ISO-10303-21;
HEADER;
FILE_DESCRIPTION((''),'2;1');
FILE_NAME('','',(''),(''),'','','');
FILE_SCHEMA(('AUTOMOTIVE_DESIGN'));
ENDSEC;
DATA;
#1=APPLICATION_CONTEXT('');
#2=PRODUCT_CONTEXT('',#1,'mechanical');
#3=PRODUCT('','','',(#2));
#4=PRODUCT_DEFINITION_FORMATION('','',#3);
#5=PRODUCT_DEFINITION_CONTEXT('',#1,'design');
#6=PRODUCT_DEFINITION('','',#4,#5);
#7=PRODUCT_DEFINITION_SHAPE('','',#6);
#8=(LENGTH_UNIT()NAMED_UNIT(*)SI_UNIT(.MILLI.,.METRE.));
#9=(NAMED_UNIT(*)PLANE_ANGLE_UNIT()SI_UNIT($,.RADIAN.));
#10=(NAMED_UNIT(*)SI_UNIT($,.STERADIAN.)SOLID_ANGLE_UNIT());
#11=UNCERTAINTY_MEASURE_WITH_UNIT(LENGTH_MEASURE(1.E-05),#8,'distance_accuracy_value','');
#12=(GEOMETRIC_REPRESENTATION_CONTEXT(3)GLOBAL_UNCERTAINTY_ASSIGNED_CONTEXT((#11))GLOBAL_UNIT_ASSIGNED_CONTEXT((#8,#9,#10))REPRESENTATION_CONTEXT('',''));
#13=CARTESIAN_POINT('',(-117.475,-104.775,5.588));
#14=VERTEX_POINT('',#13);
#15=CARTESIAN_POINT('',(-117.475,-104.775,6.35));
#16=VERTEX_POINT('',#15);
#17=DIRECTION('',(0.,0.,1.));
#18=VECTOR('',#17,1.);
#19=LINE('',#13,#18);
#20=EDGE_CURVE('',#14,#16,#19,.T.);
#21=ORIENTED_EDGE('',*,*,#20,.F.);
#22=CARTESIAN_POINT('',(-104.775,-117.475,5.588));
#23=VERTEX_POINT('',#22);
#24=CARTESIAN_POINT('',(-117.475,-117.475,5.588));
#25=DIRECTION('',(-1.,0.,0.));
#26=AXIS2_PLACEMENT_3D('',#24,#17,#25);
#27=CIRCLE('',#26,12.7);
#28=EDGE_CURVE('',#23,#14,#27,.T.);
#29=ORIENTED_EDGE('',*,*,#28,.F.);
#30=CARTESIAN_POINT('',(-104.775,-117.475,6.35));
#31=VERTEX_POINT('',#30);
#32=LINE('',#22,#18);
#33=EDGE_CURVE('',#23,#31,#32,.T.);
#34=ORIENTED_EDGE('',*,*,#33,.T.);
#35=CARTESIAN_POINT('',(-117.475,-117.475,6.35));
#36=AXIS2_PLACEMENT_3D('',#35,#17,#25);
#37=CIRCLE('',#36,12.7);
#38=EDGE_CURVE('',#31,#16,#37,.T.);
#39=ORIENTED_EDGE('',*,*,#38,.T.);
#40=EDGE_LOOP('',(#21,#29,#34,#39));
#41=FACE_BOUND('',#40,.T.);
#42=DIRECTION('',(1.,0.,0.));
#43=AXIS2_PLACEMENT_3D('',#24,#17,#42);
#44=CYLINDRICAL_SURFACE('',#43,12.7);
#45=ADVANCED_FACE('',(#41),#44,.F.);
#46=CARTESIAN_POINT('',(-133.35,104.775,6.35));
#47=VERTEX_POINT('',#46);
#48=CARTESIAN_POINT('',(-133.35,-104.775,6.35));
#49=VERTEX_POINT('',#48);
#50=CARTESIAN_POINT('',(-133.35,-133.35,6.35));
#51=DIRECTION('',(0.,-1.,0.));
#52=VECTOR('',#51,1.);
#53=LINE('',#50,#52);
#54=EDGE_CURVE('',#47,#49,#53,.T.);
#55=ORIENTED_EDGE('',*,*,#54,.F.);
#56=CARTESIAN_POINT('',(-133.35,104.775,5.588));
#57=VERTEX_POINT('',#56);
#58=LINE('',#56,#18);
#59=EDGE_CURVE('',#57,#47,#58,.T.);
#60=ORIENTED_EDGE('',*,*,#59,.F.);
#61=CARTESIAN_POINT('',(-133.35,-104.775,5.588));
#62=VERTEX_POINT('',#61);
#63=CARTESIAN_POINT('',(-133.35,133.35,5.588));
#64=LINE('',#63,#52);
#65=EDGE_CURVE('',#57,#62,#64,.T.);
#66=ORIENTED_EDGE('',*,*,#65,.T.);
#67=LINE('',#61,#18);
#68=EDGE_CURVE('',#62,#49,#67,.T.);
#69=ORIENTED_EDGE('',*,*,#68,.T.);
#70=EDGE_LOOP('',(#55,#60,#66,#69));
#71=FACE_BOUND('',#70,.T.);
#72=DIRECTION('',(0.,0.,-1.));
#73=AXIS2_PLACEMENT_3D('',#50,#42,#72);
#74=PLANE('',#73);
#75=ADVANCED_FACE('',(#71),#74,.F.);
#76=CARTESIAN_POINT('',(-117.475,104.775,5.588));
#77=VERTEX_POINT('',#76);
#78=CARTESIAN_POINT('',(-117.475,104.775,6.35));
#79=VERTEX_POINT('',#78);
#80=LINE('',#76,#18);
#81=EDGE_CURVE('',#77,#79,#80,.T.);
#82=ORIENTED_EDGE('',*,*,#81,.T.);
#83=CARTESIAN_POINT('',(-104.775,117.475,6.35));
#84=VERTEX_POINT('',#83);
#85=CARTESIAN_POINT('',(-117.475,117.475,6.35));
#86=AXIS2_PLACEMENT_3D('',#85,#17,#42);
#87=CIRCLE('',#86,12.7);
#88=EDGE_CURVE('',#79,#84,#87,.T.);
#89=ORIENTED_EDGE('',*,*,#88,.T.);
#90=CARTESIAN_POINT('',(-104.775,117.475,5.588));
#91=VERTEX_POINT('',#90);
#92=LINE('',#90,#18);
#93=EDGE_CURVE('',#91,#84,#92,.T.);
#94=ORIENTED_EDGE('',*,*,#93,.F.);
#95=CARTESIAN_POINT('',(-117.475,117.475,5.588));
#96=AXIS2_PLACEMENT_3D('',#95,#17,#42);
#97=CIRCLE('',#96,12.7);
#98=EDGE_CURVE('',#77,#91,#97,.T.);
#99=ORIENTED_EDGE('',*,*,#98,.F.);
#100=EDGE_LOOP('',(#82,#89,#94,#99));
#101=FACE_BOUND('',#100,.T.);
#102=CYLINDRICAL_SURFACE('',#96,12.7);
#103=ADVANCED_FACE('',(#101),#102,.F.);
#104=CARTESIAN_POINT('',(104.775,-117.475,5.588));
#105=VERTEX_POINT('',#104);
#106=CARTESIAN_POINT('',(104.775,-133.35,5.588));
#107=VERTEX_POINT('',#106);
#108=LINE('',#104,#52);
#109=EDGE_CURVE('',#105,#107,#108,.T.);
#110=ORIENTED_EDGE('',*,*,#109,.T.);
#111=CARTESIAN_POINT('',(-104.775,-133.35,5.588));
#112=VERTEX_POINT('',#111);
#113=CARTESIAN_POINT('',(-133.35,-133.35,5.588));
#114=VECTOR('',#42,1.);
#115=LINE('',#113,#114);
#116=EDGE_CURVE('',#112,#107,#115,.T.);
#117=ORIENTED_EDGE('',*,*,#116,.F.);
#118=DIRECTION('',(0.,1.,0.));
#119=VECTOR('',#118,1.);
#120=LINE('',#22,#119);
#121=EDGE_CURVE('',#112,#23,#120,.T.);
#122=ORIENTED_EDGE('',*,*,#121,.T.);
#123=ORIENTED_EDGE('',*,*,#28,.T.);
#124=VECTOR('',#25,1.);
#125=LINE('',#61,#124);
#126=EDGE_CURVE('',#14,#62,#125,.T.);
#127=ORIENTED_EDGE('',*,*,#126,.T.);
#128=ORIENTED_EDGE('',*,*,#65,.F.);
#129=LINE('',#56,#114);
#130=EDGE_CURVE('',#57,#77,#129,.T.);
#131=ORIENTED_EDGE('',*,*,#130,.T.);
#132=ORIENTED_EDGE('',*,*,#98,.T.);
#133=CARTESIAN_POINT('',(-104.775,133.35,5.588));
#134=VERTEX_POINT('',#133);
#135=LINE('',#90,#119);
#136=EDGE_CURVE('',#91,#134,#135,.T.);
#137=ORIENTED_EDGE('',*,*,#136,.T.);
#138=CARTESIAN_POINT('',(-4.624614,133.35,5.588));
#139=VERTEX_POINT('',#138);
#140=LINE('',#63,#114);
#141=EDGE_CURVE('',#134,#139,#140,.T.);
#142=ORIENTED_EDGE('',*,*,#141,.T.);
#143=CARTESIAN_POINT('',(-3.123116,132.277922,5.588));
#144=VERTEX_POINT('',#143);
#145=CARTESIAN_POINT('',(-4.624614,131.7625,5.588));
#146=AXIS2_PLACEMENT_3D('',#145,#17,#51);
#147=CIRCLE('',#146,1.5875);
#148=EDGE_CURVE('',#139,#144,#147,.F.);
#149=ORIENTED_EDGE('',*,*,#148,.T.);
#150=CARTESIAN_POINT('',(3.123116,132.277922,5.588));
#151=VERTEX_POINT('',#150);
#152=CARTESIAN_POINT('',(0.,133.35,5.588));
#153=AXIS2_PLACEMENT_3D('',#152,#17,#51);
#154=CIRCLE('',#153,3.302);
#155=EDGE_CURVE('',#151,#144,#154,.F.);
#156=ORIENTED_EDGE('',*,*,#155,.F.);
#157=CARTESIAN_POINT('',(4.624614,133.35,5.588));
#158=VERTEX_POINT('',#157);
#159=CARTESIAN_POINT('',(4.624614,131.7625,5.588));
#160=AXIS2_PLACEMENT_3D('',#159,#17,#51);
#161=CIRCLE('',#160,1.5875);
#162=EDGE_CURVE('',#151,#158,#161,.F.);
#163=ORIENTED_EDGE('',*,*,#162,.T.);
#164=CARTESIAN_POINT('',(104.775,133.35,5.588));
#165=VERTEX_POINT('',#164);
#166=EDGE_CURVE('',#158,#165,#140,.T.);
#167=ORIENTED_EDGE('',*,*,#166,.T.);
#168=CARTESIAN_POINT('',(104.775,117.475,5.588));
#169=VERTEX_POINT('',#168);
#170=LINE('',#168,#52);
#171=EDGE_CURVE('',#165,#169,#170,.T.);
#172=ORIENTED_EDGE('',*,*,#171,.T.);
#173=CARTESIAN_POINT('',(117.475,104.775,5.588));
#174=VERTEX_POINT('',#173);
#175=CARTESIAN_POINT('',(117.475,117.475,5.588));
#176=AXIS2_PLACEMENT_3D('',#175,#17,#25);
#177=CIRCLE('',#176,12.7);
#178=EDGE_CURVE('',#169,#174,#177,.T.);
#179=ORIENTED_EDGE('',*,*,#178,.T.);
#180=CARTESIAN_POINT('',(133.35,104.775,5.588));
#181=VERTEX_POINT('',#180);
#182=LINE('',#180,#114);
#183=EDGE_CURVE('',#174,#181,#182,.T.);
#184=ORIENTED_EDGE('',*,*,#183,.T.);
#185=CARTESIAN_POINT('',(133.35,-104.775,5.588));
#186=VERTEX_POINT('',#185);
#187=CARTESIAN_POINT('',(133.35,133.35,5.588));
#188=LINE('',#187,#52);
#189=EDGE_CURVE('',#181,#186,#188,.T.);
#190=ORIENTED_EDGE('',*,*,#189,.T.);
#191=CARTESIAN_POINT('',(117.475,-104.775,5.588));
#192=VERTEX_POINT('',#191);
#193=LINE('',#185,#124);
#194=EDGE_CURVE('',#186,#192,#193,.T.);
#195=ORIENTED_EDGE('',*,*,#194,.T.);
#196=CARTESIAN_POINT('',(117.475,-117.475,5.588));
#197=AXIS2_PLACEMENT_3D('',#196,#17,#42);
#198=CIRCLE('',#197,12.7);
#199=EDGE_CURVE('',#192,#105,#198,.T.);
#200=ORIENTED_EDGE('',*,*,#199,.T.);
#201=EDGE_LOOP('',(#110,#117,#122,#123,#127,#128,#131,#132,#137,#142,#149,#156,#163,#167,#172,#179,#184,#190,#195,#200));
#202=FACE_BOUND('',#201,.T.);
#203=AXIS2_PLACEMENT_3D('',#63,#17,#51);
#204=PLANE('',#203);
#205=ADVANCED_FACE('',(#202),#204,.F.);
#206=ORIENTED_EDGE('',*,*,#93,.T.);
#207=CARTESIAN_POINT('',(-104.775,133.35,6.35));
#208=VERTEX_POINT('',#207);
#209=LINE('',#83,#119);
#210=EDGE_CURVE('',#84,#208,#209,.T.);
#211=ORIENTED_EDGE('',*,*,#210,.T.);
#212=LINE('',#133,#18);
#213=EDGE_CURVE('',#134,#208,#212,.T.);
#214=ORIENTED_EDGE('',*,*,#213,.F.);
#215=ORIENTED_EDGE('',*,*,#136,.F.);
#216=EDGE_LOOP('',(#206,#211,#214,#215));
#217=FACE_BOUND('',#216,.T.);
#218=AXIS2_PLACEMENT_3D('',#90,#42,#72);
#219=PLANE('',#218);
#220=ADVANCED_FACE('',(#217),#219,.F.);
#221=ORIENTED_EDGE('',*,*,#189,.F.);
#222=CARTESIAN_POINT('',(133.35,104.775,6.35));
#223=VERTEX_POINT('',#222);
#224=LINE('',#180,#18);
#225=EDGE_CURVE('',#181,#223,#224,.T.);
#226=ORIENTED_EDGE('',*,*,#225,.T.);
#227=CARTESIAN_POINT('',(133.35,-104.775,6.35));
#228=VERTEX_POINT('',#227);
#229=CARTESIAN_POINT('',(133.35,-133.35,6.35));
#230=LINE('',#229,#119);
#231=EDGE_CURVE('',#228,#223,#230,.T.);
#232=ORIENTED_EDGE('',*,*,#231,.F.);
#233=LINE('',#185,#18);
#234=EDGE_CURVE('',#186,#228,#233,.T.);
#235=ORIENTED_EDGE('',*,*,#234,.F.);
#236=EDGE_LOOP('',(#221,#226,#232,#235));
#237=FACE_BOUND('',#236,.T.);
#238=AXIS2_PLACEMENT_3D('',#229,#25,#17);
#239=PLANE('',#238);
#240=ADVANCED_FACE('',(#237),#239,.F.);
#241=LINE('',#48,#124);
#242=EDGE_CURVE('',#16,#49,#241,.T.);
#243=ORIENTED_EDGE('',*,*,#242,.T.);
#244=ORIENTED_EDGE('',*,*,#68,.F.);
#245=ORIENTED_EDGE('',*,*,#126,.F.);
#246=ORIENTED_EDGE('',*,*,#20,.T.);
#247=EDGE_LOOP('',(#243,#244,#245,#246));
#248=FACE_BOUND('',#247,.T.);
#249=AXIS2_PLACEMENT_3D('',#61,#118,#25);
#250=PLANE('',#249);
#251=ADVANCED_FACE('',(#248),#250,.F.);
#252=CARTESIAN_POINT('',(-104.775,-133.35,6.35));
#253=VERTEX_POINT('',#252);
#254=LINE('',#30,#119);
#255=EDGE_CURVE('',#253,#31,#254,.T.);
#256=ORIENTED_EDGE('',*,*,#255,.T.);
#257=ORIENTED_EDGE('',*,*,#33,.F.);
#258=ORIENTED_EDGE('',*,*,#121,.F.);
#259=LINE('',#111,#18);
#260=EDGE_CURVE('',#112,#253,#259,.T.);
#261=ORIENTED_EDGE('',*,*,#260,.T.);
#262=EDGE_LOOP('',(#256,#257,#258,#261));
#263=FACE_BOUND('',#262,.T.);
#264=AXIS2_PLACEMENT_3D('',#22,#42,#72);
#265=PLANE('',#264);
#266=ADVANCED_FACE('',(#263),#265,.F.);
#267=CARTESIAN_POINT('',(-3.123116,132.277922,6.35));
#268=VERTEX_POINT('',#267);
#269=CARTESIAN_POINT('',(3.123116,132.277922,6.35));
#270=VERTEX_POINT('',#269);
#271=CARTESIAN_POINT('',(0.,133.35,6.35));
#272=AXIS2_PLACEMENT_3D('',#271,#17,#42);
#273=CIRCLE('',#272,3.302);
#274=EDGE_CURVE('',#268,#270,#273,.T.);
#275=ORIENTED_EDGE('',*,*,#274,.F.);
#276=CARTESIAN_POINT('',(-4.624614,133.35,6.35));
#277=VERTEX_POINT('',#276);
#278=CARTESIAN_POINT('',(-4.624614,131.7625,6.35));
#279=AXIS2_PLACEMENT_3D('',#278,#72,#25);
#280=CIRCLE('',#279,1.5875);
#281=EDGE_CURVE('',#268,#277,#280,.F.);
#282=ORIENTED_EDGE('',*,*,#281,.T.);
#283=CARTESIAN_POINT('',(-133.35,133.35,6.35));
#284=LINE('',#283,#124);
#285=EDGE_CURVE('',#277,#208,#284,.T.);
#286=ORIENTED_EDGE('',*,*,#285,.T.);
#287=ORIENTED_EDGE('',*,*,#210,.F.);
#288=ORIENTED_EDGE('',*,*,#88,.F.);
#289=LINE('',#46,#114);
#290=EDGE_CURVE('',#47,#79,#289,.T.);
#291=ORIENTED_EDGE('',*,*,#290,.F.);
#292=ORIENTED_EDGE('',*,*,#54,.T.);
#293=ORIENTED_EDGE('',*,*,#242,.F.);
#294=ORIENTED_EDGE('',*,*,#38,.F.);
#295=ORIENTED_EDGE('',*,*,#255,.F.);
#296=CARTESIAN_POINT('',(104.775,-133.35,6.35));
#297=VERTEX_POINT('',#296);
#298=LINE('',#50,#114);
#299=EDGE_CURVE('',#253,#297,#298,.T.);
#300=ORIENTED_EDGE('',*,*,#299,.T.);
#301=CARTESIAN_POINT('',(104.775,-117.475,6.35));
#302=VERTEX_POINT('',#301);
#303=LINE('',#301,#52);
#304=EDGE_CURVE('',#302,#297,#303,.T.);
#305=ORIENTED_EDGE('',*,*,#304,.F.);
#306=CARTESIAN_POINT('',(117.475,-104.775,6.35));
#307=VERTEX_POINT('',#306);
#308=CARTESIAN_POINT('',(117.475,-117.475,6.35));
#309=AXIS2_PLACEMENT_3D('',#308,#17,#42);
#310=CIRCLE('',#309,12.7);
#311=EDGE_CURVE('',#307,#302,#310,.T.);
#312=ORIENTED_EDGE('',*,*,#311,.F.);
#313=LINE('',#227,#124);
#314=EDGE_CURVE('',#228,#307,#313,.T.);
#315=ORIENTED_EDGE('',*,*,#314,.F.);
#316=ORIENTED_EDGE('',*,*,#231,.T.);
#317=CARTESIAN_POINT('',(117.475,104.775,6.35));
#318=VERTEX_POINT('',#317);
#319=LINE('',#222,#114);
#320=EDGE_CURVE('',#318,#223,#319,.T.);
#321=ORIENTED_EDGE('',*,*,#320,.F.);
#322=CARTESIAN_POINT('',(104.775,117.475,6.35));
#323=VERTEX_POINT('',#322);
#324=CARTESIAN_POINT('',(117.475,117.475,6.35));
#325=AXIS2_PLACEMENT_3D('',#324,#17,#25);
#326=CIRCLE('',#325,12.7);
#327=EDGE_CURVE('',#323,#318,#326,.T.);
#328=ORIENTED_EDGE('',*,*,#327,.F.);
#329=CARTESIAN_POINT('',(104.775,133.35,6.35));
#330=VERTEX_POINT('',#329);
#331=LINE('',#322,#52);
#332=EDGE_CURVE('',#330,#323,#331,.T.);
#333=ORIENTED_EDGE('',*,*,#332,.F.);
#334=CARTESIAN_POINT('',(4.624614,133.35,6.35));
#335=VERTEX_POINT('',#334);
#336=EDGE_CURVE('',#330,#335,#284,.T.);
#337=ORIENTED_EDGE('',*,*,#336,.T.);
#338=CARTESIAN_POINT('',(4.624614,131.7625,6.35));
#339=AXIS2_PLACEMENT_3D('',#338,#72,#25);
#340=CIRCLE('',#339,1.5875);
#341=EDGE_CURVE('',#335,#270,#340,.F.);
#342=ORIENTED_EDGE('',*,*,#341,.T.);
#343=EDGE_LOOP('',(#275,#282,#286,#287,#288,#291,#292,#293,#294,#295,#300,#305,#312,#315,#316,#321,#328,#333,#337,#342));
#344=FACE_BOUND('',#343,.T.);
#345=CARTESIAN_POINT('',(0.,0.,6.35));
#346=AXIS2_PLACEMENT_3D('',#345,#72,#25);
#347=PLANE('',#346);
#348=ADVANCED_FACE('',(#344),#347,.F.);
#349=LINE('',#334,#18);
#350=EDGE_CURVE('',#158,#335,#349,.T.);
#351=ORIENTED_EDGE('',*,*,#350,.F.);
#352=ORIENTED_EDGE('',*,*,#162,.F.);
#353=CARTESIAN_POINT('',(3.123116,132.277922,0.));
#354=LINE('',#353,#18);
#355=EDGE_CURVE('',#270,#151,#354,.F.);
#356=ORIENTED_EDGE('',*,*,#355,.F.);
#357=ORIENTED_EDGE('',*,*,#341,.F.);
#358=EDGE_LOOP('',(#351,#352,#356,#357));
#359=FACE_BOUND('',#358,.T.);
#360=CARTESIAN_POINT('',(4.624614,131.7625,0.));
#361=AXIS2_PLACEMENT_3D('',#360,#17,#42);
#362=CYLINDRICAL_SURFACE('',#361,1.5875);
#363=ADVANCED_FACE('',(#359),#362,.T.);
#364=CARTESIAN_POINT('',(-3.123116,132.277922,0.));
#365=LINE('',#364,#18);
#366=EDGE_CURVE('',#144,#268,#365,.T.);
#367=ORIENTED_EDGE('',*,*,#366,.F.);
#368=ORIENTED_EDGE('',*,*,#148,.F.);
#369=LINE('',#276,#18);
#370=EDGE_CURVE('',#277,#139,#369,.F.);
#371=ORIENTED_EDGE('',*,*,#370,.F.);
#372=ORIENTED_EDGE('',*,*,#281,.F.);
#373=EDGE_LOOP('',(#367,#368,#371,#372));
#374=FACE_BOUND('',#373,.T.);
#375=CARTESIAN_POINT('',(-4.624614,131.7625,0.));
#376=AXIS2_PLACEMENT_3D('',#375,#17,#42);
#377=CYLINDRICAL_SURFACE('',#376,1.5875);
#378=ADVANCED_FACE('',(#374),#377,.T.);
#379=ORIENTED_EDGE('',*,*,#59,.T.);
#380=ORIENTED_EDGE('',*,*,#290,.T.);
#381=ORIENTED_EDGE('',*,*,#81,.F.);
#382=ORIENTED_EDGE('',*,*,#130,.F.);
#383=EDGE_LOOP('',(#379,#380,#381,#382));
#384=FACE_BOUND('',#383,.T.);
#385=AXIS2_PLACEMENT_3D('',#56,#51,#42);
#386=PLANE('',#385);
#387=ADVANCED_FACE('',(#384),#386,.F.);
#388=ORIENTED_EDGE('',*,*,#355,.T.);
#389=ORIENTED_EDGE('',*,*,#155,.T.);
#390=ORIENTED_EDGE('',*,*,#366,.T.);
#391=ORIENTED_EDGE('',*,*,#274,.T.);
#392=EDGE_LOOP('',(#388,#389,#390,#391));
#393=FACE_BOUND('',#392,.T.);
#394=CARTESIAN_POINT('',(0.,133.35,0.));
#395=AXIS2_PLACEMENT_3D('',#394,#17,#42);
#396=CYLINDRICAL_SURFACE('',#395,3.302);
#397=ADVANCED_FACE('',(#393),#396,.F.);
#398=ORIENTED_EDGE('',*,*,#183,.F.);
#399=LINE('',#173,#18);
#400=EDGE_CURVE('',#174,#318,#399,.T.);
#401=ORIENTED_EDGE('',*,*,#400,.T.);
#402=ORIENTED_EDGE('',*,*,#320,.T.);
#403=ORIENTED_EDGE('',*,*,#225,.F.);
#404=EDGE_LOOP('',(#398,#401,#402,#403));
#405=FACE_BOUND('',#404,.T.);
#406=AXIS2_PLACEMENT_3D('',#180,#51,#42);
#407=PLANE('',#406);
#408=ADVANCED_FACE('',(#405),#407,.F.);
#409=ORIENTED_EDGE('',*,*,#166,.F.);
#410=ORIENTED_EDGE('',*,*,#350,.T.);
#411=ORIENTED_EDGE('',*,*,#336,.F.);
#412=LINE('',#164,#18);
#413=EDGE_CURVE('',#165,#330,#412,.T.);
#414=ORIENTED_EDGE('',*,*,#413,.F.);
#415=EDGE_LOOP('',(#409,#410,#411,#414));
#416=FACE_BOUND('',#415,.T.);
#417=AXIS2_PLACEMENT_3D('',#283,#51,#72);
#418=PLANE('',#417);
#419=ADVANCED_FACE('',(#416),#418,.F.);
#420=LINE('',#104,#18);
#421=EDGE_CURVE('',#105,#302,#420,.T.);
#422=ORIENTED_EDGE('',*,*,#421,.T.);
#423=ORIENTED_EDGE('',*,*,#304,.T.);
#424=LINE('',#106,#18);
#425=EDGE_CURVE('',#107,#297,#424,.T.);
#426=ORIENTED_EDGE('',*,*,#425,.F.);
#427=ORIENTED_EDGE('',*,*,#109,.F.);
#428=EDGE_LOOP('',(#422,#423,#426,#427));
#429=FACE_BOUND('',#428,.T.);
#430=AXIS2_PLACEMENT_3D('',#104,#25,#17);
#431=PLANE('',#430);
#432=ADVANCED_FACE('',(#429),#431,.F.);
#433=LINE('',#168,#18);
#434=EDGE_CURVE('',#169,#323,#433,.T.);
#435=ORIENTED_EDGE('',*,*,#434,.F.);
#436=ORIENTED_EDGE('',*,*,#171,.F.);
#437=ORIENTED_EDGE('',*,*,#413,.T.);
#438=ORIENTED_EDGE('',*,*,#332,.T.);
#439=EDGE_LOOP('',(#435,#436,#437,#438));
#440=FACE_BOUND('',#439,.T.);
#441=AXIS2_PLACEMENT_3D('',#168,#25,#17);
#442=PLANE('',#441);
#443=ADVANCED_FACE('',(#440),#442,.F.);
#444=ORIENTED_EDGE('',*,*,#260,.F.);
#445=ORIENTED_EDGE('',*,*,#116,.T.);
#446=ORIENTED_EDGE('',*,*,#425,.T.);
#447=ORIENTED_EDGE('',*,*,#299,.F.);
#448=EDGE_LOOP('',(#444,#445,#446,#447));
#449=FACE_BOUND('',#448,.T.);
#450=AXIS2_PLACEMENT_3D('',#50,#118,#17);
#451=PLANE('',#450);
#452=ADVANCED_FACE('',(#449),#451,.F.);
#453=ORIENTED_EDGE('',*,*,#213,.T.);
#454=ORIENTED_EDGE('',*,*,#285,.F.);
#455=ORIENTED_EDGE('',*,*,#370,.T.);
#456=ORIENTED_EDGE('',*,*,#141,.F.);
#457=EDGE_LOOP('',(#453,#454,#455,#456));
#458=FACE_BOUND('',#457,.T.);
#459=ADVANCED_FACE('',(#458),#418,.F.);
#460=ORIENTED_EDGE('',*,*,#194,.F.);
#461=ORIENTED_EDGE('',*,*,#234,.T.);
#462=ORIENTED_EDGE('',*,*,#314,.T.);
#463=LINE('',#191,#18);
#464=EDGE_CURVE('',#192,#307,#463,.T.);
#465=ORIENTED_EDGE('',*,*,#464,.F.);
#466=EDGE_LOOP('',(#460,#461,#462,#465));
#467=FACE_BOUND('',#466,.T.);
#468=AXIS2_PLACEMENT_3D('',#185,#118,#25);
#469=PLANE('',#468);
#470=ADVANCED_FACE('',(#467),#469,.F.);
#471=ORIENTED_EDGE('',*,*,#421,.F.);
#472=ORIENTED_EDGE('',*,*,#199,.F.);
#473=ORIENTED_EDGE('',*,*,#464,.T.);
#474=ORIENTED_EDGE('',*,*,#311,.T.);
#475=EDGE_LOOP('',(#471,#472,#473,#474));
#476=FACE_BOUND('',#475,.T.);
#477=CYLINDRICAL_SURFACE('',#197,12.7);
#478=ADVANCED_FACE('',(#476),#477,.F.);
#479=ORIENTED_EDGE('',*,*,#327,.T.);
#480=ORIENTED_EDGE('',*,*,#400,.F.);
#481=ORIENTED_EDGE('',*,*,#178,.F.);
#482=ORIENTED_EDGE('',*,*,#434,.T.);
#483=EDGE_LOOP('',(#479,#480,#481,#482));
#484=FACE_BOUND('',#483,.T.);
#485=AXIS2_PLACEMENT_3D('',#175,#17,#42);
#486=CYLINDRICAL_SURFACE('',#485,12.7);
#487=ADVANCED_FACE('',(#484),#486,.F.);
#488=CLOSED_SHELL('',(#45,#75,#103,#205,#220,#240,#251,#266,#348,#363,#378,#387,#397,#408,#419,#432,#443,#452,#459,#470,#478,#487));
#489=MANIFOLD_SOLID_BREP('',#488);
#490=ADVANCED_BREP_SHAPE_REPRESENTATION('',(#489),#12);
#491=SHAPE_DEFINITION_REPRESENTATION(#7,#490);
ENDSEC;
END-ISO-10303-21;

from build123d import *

# Parameters (mm, degrees)
FE_00082_OUTLINE_R = 3.3782
FE_00082_DEPTH     = 6.35
SKETCH1_W          = 5.588
SKETCH1_H          = 266.7
CUT_EXTRUDE1_DEPTH = 299.247271572
CUT_EXTRUDE2_DEPTH = 189.586918009


# Read off the part's stored shape, not the designer's step: FE-00082
with BuildPart() as part:
    # FE-00082 outline → FE-00082 (new body)
    with BuildSketch(Plane.XY):
        with BuildLine():
            Line((127, 133.35), (4.62461393, 133.35))
            ThreePointArc((4.62461393, 133.35), (3.702137995, 133.054473064), (3.123115901, 132.277922078))
            ThreePointArc((3.123115901, 132.277922078), (0, 130.048), (-3.123115901, 132.277922078))
            ThreePointArc((-3.123115901, 132.277922078), (-3.702137995, 133.054473064), (-4.62461393, 133.35))
            Line((-4.62461393, 133.35), (-127, 133.35))
            ThreePointArc((-127, 133.35), (-131.490128061, 131.490128061), (-133.35, 127))
            Line((-133.35, 127), (-133.35, -127))
            ThreePointArc((-133.35, -127), (-131.490128061, -131.490128061), (-127, -133.35))
            Line((-127, -133.35), (127, -133.35))
            ThreePointArc((127, -133.35), (131.490128061, -131.490128061), (133.35, -127))
            Line((133.35, -127), (133.35, 127))
            ThreePointArc((133.35, 127), (131.490128061, 131.490128061), (127, 133.35))
        make_face()
        with Locations((-117.475, -117.475)):
            Circle(FE_00082_OUTLINE_R, mode=Mode.SUBTRACT)
        with Locations((117.475, -117.475)):
            Circle(FE_00082_OUTLINE_R, mode=Mode.SUBTRACT)
        with Locations((-117.475, 117.475)):
            Circle(FE_00082_OUTLINE_R, mode=Mode.SUBTRACT)
        with Locations((117.475, 117.475)):
            Circle(FE_00082_OUTLINE_R, mode=Mode.SUBTRACT)
    extrude(amount=FE_00082_DEPTH)

    # Sketch1 → Cut-Extrude1 (cut, through all)
    with BuildSketch(Plane(origin=(133.35, 0, 0), x_dir=(0, 0, -1), z_dir=(1, 0, 0))):
        with Locations((-2.794, 0)):
            Rectangle(SKETCH1_W, SKETCH1_H)
    extrude(amount=-CUT_EXTRUDE1_DEPTH, mode=Mode.SUBTRACT)

    # Sketch2 → Cut-Extrude2 (cut, through all)
    with BuildSketch(Plane.XY.offset(6.35)):
        with BuildLine():
            Line((-133.35, 104.775), (-117.475, 104.775))
            ThreePointArc((-117.475, 104.775), (-108.494743879, 108.494743879), (-104.775, 117.475))
            Line((-104.775, 117.475), (-104.775, 133.35))
            Line((-104.775, 133.35), (-127, 133.35))
            ThreePointArc((-127, 133.35), (-131.490128061, 131.490128061), (-133.35, 127))
            Line((-133.35, 127), (-133.35, 104.775))
        make_face()
        with BuildLine():
            Line((-104.775, -133.35), (-127, -133.35))
            ThreePointArc((-127, -133.35), (-131.490128061, -131.490128061), (-133.35, -127))
            Line((-133.35, -127), (-133.35, -104.775))
            Line((-133.35, -104.775), (-117.475, -104.775))
            ThreePointArc((-117.475, -104.775), (-108.494743879, -108.494743879), (-104.775, -117.475))
            Line((-104.775, -117.475), (-104.775, -133.35))
        make_face()
        with BuildLine():
            Line((133.35, -104.775), (117.475, -104.775))
            ThreePointArc((117.475, -104.775), (108.494743879, -108.494743879), (104.775, -117.475))
            Line((104.775, -117.475), (104.775, -133.35))
            Line((104.775, -133.35), (127, -133.35))
            ThreePointArc((127, -133.35), (131.490128061, -131.490128061), (133.35, -127))
            Line((133.35, -127), (133.35, -104.775))
        make_face()
        with BuildLine():
            Line((104.775, 133.35), (127, 133.35))
            ThreePointArc((127, 133.35), (131.490128061, 131.490128061), (133.35, 127))
            Line((133.35, 127), (133.35, 104.775))
            Line((133.35, 104.775), (117.475, 104.775))
            ThreePointArc((117.475, 104.775), (108.494743879, 108.494743879), (104.775, 117.475))
            Line((104.775, 117.475), (104.775, 133.35))
        make_face()
    extrude(amount=-CUT_EXTRUDE2_DEPTH, mode=Mode.SUBTRACT)


solid = part.part
